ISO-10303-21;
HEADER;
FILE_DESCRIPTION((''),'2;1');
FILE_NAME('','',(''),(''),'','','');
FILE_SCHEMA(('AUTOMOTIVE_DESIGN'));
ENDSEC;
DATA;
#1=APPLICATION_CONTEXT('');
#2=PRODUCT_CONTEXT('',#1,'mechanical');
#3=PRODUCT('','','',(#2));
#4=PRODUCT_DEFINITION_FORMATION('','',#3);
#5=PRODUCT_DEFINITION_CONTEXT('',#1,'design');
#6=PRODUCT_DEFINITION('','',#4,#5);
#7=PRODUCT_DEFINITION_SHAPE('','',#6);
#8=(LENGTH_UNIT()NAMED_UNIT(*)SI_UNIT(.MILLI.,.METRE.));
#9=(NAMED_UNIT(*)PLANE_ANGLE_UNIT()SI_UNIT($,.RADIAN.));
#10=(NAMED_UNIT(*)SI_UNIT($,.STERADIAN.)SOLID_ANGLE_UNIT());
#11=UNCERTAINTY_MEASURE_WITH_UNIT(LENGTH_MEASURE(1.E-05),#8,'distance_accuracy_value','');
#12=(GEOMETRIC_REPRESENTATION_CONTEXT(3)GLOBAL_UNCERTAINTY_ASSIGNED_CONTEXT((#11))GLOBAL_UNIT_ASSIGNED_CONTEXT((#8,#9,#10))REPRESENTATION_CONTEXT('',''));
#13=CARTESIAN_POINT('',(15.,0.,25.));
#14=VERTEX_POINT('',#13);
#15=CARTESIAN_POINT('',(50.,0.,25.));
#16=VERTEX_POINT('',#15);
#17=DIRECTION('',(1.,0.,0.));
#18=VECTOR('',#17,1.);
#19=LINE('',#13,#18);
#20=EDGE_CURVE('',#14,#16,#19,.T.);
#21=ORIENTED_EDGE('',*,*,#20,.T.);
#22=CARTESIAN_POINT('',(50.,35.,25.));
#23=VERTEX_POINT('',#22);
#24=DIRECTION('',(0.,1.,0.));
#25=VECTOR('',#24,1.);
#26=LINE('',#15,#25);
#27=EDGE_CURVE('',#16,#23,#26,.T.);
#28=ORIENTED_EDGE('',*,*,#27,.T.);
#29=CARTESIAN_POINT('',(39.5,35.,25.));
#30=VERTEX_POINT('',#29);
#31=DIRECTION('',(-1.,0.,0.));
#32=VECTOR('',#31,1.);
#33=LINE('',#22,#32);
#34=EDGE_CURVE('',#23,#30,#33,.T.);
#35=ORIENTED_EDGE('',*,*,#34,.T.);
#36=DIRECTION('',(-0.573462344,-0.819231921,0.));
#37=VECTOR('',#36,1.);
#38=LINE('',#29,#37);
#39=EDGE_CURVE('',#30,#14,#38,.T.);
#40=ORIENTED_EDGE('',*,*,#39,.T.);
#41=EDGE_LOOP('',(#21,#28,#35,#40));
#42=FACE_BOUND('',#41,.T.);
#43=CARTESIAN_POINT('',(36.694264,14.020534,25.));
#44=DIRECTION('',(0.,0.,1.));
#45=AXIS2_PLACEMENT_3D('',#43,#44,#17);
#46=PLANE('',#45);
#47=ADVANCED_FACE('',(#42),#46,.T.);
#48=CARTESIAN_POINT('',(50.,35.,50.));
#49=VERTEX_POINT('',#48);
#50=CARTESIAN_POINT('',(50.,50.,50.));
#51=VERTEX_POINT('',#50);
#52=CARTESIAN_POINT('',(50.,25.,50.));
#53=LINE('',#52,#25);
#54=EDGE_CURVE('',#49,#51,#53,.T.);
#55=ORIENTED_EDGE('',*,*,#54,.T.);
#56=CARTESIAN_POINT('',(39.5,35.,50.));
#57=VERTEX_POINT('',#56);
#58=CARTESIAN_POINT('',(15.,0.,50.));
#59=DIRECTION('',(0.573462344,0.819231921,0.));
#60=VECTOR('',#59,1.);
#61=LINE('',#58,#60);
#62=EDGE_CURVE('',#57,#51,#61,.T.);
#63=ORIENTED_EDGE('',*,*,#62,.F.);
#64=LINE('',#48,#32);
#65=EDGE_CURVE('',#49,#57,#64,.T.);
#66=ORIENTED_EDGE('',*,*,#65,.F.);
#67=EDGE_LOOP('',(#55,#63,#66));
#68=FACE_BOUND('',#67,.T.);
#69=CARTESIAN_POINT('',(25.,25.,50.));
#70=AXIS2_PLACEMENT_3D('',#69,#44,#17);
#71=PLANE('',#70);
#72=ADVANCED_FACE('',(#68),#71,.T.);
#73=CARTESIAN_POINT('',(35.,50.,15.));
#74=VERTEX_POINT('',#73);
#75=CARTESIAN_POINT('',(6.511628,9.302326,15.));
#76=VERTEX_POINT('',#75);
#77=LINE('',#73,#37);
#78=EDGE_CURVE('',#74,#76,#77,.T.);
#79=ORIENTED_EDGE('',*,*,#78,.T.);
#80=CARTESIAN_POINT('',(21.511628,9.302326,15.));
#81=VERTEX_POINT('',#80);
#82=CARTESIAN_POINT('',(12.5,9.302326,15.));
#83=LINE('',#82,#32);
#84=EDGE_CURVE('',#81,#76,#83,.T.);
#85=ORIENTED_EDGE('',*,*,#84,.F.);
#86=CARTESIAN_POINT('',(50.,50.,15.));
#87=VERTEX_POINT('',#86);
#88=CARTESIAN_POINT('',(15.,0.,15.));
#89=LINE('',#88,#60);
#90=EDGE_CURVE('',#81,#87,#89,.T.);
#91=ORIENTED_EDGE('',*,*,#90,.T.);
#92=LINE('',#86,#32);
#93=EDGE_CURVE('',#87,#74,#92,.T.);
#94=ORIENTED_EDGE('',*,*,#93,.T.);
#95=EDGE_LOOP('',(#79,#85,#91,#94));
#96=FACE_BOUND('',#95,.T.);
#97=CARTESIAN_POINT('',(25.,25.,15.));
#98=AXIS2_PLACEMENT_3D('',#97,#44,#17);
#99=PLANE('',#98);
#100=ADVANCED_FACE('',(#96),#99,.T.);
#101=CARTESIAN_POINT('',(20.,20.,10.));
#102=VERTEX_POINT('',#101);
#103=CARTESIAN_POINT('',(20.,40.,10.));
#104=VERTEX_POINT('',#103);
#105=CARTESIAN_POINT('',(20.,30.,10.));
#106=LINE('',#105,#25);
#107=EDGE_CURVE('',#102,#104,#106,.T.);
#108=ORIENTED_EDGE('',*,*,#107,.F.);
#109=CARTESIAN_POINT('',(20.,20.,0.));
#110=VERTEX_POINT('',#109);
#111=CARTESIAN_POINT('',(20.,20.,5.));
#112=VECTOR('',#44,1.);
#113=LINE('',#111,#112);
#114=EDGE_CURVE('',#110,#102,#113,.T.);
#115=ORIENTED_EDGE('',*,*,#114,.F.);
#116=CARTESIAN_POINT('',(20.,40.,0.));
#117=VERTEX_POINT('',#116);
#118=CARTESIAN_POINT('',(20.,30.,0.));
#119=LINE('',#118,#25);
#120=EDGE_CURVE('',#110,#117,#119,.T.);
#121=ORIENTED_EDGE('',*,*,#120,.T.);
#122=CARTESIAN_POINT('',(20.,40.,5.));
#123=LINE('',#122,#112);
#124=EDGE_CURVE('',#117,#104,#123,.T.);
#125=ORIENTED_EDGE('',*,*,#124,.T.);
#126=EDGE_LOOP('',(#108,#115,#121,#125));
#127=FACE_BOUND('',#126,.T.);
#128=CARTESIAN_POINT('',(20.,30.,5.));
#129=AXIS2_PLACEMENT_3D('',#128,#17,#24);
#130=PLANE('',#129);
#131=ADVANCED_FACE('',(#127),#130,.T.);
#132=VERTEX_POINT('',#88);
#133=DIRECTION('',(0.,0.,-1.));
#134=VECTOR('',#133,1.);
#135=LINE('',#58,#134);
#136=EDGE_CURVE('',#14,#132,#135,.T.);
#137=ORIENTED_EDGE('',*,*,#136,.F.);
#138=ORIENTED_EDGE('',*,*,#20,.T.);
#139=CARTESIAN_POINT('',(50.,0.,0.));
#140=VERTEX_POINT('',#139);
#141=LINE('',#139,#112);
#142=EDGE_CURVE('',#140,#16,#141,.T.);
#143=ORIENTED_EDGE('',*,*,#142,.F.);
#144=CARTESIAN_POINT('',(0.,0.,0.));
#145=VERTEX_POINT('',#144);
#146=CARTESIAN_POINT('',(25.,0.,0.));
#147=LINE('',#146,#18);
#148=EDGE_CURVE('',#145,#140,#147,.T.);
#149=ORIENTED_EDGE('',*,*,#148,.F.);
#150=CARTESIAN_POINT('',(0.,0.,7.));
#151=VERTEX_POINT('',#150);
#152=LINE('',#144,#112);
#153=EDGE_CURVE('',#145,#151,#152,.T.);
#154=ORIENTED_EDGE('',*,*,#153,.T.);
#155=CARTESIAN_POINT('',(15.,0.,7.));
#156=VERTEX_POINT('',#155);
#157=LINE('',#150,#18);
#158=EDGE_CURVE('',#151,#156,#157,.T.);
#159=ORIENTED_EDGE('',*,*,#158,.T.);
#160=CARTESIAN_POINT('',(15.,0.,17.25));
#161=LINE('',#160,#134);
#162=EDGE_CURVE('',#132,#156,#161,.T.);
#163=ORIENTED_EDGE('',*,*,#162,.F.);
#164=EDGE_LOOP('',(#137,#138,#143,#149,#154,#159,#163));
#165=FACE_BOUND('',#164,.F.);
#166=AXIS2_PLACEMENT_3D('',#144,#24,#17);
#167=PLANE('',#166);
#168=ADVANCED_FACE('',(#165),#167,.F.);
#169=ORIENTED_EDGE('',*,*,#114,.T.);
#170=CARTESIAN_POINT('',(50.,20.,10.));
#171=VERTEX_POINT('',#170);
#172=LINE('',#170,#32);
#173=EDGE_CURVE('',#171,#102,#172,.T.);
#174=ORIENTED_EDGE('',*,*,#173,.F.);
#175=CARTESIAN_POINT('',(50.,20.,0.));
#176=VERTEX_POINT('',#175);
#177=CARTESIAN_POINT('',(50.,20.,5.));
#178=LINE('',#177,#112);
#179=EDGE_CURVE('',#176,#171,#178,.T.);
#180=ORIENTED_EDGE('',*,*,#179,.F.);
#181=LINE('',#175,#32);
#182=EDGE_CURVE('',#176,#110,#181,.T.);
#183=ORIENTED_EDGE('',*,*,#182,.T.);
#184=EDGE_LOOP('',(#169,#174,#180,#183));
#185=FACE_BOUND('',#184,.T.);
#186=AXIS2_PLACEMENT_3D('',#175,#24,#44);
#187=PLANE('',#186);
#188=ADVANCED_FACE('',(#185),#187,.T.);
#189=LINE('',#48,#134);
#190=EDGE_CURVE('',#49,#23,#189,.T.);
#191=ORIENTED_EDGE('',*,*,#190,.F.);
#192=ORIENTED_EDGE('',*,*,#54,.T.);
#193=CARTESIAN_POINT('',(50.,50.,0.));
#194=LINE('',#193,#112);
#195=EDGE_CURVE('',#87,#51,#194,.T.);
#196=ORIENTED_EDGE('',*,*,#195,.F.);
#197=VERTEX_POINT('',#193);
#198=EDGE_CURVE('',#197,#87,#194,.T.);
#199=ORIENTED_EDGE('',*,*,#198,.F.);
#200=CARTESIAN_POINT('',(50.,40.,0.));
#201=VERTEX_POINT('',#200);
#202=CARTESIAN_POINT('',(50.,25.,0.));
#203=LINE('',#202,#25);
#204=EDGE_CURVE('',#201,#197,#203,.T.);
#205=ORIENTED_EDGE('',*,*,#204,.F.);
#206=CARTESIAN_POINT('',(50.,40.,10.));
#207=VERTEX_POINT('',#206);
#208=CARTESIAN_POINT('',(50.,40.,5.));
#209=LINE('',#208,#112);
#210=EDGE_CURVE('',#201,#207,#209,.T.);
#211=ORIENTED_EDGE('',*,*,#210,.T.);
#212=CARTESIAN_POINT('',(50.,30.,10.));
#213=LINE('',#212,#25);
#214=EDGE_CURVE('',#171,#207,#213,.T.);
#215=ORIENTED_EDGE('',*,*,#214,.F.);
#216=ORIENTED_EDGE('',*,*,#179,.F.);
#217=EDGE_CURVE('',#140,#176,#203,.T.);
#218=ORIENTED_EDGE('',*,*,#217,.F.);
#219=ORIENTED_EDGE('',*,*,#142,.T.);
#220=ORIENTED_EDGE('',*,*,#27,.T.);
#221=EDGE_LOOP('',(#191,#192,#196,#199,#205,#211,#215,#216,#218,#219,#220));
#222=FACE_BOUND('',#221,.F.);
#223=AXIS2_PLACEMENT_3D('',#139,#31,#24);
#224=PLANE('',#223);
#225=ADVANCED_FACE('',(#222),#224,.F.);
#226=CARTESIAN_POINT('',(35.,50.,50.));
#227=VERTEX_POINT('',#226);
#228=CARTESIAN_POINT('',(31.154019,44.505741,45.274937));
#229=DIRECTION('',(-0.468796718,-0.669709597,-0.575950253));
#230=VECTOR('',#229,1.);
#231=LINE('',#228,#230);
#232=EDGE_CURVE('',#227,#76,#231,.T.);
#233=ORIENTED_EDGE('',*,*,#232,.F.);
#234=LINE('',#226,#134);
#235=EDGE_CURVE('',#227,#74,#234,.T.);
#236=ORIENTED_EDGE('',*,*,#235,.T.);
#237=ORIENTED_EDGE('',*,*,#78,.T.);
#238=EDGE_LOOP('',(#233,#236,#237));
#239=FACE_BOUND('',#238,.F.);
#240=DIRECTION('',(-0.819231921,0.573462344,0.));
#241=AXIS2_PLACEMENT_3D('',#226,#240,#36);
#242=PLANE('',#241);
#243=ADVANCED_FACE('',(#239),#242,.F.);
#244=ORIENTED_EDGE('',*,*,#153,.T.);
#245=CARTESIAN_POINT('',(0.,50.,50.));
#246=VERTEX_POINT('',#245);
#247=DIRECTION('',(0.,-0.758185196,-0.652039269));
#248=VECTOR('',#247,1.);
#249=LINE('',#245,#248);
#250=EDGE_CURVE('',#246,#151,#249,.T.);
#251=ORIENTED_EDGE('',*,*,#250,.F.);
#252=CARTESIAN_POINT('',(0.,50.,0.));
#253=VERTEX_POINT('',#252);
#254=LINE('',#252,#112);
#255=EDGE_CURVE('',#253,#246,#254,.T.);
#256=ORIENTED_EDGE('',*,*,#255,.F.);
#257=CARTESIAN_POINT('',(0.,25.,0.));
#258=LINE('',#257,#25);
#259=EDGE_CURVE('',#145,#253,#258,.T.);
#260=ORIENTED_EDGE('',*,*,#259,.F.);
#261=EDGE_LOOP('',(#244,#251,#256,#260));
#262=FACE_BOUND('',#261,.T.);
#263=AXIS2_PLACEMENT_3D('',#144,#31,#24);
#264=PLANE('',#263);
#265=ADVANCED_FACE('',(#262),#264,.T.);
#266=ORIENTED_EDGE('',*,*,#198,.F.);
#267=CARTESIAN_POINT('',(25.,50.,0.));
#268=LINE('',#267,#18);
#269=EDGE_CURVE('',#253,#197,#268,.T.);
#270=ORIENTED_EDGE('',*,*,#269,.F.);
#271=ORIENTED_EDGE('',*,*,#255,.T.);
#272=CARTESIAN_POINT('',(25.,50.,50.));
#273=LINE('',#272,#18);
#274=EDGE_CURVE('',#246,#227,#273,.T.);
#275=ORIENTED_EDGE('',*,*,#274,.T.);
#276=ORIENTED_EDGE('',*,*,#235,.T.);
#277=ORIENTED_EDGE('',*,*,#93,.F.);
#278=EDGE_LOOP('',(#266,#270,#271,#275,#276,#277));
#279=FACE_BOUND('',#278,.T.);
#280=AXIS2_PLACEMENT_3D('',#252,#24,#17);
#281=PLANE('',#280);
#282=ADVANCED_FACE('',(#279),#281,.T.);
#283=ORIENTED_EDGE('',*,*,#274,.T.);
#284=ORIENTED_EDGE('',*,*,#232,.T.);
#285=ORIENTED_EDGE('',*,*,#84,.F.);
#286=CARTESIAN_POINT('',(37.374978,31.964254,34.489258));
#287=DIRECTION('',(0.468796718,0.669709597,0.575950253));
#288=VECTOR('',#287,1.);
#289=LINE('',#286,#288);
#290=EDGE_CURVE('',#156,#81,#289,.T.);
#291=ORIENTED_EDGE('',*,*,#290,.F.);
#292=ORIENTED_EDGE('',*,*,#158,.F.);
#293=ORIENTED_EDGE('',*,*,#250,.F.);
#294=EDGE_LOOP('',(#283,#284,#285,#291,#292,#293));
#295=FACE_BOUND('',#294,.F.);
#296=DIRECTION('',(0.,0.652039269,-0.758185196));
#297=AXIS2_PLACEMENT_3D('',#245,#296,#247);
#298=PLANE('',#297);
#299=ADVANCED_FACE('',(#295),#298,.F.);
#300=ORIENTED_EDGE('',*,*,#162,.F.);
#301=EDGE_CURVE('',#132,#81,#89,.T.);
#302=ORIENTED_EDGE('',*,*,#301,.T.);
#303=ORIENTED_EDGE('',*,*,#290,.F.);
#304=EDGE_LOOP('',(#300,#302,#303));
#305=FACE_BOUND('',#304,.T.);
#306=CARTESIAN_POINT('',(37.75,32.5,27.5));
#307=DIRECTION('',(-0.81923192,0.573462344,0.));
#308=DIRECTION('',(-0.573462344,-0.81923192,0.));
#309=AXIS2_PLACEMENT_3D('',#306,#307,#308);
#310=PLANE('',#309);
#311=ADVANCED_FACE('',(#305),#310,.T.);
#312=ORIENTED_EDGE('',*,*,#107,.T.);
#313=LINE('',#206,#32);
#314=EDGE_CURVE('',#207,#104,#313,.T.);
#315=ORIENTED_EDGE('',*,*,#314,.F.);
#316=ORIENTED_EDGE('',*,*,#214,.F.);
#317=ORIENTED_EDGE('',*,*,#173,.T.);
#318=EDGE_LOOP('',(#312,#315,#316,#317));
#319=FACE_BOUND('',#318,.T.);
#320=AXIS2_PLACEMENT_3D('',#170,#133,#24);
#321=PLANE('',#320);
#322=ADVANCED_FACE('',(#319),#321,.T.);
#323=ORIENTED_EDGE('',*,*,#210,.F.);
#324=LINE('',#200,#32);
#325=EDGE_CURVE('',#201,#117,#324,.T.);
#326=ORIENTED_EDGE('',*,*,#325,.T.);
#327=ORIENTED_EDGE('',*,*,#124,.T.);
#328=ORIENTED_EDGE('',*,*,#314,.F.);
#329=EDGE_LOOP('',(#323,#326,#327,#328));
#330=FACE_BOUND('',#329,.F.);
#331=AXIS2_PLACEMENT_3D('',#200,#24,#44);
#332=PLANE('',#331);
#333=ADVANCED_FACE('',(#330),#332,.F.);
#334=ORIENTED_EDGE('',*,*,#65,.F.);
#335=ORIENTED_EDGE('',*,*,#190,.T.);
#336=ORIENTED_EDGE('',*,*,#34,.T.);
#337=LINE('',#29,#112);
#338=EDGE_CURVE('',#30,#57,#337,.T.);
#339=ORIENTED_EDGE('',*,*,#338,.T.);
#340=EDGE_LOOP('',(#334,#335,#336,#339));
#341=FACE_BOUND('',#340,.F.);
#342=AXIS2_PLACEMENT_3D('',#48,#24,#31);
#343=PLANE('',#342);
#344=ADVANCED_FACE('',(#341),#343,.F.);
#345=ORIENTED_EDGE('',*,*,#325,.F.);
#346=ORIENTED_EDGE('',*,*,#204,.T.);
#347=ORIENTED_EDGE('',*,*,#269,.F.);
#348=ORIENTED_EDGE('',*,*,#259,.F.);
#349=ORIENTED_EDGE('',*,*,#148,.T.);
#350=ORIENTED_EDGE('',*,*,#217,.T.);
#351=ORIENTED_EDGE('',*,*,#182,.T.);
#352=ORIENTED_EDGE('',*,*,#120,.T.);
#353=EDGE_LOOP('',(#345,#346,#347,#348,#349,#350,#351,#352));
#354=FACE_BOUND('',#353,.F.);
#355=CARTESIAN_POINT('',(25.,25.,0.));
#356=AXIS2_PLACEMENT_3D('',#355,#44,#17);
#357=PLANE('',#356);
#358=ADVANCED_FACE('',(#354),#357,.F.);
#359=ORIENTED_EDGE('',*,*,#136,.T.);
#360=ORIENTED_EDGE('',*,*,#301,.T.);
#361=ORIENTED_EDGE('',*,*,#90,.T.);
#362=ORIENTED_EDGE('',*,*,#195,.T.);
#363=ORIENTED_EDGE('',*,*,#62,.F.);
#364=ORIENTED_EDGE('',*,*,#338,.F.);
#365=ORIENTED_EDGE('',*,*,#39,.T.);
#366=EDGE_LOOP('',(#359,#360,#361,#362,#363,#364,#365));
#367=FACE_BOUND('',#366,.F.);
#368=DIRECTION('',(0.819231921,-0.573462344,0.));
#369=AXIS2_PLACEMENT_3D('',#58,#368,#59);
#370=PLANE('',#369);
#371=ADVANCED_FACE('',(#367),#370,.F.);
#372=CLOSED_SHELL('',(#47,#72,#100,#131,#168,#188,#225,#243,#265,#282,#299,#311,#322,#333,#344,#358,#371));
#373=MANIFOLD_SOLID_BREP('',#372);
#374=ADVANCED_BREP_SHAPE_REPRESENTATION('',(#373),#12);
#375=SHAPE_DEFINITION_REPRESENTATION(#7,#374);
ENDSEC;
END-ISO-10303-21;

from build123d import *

# Parameters (mm, degrees)
F0_W      = 50
F0_H      = 50
F1_DEPTH  = 50
F5_W      = 20
F5_H      = 10
F6_DEPTH  = 30
F8_DEPTH  = 35
F10_DEPTH = 25
F12_REACH = 115.9479483752


with BuildPart() as f1:
    # F0 (on Top) → F1 (new body)
    with BuildSketch(Plane.XY):
        with Locations((25, 25)):
            Rectangle(F0_W, F0_H)
    extrude(amount=F1_DEPTH)

    # F5 (on face) → F6 (cut)
    with BuildSketch(Plane.YZ.offset(50)):
        with Locations((30, 5)):
            Rectangle(F5_W, F5_H)
    extrude(amount=-F6_DEPTH, mode=Mode.SUBTRACT)

    # F7 (on face) → F8 (cut)
    with BuildSketch(Plane.XY.offset(50)):
        Polygon((15, 0), (50, 50), (35, 50), (0, 0), align=None)
    extrude(amount=-F8_DEPTH, mode=Mode.SUBTRACT)

    # F9 (on face) → F10 (cut)
    with BuildSketch(Plane.XY.offset(50)):
        Polygon((50, 35), (39.5, 35), (15, 0), (50, 0), align=None)
    extrude(amount=-F10_DEPTH, mode=Mode.SUBTRACT)

    f12_end = Plane(origin=(37.75, 32.5, 27.5), x_dir=(-0.5734623444, -0.8192319205, 0), z_dir=(-0.8192319205, 0.5734623444, 0))
    # F11 (on face) → F12 (cut, up to a plane its end follows)
    with BuildSketch(Plane(origin=(0, 0, 0), x_dir=(0, -1, 0), z_dir=(-1, 0, 0))):
        Polygon((0, 7), (0, 50), (-50, 50), align=None)
    f12_long = extrude(amount=-F12_REACH, mode=Mode.PRIVATE)
    add(split(f12_long, bisect_by=f12_end, keep=Keep.TOP, mode=Mode.PRIVATE), mode=Mode.SUBTRACT)


solid = f1.part
